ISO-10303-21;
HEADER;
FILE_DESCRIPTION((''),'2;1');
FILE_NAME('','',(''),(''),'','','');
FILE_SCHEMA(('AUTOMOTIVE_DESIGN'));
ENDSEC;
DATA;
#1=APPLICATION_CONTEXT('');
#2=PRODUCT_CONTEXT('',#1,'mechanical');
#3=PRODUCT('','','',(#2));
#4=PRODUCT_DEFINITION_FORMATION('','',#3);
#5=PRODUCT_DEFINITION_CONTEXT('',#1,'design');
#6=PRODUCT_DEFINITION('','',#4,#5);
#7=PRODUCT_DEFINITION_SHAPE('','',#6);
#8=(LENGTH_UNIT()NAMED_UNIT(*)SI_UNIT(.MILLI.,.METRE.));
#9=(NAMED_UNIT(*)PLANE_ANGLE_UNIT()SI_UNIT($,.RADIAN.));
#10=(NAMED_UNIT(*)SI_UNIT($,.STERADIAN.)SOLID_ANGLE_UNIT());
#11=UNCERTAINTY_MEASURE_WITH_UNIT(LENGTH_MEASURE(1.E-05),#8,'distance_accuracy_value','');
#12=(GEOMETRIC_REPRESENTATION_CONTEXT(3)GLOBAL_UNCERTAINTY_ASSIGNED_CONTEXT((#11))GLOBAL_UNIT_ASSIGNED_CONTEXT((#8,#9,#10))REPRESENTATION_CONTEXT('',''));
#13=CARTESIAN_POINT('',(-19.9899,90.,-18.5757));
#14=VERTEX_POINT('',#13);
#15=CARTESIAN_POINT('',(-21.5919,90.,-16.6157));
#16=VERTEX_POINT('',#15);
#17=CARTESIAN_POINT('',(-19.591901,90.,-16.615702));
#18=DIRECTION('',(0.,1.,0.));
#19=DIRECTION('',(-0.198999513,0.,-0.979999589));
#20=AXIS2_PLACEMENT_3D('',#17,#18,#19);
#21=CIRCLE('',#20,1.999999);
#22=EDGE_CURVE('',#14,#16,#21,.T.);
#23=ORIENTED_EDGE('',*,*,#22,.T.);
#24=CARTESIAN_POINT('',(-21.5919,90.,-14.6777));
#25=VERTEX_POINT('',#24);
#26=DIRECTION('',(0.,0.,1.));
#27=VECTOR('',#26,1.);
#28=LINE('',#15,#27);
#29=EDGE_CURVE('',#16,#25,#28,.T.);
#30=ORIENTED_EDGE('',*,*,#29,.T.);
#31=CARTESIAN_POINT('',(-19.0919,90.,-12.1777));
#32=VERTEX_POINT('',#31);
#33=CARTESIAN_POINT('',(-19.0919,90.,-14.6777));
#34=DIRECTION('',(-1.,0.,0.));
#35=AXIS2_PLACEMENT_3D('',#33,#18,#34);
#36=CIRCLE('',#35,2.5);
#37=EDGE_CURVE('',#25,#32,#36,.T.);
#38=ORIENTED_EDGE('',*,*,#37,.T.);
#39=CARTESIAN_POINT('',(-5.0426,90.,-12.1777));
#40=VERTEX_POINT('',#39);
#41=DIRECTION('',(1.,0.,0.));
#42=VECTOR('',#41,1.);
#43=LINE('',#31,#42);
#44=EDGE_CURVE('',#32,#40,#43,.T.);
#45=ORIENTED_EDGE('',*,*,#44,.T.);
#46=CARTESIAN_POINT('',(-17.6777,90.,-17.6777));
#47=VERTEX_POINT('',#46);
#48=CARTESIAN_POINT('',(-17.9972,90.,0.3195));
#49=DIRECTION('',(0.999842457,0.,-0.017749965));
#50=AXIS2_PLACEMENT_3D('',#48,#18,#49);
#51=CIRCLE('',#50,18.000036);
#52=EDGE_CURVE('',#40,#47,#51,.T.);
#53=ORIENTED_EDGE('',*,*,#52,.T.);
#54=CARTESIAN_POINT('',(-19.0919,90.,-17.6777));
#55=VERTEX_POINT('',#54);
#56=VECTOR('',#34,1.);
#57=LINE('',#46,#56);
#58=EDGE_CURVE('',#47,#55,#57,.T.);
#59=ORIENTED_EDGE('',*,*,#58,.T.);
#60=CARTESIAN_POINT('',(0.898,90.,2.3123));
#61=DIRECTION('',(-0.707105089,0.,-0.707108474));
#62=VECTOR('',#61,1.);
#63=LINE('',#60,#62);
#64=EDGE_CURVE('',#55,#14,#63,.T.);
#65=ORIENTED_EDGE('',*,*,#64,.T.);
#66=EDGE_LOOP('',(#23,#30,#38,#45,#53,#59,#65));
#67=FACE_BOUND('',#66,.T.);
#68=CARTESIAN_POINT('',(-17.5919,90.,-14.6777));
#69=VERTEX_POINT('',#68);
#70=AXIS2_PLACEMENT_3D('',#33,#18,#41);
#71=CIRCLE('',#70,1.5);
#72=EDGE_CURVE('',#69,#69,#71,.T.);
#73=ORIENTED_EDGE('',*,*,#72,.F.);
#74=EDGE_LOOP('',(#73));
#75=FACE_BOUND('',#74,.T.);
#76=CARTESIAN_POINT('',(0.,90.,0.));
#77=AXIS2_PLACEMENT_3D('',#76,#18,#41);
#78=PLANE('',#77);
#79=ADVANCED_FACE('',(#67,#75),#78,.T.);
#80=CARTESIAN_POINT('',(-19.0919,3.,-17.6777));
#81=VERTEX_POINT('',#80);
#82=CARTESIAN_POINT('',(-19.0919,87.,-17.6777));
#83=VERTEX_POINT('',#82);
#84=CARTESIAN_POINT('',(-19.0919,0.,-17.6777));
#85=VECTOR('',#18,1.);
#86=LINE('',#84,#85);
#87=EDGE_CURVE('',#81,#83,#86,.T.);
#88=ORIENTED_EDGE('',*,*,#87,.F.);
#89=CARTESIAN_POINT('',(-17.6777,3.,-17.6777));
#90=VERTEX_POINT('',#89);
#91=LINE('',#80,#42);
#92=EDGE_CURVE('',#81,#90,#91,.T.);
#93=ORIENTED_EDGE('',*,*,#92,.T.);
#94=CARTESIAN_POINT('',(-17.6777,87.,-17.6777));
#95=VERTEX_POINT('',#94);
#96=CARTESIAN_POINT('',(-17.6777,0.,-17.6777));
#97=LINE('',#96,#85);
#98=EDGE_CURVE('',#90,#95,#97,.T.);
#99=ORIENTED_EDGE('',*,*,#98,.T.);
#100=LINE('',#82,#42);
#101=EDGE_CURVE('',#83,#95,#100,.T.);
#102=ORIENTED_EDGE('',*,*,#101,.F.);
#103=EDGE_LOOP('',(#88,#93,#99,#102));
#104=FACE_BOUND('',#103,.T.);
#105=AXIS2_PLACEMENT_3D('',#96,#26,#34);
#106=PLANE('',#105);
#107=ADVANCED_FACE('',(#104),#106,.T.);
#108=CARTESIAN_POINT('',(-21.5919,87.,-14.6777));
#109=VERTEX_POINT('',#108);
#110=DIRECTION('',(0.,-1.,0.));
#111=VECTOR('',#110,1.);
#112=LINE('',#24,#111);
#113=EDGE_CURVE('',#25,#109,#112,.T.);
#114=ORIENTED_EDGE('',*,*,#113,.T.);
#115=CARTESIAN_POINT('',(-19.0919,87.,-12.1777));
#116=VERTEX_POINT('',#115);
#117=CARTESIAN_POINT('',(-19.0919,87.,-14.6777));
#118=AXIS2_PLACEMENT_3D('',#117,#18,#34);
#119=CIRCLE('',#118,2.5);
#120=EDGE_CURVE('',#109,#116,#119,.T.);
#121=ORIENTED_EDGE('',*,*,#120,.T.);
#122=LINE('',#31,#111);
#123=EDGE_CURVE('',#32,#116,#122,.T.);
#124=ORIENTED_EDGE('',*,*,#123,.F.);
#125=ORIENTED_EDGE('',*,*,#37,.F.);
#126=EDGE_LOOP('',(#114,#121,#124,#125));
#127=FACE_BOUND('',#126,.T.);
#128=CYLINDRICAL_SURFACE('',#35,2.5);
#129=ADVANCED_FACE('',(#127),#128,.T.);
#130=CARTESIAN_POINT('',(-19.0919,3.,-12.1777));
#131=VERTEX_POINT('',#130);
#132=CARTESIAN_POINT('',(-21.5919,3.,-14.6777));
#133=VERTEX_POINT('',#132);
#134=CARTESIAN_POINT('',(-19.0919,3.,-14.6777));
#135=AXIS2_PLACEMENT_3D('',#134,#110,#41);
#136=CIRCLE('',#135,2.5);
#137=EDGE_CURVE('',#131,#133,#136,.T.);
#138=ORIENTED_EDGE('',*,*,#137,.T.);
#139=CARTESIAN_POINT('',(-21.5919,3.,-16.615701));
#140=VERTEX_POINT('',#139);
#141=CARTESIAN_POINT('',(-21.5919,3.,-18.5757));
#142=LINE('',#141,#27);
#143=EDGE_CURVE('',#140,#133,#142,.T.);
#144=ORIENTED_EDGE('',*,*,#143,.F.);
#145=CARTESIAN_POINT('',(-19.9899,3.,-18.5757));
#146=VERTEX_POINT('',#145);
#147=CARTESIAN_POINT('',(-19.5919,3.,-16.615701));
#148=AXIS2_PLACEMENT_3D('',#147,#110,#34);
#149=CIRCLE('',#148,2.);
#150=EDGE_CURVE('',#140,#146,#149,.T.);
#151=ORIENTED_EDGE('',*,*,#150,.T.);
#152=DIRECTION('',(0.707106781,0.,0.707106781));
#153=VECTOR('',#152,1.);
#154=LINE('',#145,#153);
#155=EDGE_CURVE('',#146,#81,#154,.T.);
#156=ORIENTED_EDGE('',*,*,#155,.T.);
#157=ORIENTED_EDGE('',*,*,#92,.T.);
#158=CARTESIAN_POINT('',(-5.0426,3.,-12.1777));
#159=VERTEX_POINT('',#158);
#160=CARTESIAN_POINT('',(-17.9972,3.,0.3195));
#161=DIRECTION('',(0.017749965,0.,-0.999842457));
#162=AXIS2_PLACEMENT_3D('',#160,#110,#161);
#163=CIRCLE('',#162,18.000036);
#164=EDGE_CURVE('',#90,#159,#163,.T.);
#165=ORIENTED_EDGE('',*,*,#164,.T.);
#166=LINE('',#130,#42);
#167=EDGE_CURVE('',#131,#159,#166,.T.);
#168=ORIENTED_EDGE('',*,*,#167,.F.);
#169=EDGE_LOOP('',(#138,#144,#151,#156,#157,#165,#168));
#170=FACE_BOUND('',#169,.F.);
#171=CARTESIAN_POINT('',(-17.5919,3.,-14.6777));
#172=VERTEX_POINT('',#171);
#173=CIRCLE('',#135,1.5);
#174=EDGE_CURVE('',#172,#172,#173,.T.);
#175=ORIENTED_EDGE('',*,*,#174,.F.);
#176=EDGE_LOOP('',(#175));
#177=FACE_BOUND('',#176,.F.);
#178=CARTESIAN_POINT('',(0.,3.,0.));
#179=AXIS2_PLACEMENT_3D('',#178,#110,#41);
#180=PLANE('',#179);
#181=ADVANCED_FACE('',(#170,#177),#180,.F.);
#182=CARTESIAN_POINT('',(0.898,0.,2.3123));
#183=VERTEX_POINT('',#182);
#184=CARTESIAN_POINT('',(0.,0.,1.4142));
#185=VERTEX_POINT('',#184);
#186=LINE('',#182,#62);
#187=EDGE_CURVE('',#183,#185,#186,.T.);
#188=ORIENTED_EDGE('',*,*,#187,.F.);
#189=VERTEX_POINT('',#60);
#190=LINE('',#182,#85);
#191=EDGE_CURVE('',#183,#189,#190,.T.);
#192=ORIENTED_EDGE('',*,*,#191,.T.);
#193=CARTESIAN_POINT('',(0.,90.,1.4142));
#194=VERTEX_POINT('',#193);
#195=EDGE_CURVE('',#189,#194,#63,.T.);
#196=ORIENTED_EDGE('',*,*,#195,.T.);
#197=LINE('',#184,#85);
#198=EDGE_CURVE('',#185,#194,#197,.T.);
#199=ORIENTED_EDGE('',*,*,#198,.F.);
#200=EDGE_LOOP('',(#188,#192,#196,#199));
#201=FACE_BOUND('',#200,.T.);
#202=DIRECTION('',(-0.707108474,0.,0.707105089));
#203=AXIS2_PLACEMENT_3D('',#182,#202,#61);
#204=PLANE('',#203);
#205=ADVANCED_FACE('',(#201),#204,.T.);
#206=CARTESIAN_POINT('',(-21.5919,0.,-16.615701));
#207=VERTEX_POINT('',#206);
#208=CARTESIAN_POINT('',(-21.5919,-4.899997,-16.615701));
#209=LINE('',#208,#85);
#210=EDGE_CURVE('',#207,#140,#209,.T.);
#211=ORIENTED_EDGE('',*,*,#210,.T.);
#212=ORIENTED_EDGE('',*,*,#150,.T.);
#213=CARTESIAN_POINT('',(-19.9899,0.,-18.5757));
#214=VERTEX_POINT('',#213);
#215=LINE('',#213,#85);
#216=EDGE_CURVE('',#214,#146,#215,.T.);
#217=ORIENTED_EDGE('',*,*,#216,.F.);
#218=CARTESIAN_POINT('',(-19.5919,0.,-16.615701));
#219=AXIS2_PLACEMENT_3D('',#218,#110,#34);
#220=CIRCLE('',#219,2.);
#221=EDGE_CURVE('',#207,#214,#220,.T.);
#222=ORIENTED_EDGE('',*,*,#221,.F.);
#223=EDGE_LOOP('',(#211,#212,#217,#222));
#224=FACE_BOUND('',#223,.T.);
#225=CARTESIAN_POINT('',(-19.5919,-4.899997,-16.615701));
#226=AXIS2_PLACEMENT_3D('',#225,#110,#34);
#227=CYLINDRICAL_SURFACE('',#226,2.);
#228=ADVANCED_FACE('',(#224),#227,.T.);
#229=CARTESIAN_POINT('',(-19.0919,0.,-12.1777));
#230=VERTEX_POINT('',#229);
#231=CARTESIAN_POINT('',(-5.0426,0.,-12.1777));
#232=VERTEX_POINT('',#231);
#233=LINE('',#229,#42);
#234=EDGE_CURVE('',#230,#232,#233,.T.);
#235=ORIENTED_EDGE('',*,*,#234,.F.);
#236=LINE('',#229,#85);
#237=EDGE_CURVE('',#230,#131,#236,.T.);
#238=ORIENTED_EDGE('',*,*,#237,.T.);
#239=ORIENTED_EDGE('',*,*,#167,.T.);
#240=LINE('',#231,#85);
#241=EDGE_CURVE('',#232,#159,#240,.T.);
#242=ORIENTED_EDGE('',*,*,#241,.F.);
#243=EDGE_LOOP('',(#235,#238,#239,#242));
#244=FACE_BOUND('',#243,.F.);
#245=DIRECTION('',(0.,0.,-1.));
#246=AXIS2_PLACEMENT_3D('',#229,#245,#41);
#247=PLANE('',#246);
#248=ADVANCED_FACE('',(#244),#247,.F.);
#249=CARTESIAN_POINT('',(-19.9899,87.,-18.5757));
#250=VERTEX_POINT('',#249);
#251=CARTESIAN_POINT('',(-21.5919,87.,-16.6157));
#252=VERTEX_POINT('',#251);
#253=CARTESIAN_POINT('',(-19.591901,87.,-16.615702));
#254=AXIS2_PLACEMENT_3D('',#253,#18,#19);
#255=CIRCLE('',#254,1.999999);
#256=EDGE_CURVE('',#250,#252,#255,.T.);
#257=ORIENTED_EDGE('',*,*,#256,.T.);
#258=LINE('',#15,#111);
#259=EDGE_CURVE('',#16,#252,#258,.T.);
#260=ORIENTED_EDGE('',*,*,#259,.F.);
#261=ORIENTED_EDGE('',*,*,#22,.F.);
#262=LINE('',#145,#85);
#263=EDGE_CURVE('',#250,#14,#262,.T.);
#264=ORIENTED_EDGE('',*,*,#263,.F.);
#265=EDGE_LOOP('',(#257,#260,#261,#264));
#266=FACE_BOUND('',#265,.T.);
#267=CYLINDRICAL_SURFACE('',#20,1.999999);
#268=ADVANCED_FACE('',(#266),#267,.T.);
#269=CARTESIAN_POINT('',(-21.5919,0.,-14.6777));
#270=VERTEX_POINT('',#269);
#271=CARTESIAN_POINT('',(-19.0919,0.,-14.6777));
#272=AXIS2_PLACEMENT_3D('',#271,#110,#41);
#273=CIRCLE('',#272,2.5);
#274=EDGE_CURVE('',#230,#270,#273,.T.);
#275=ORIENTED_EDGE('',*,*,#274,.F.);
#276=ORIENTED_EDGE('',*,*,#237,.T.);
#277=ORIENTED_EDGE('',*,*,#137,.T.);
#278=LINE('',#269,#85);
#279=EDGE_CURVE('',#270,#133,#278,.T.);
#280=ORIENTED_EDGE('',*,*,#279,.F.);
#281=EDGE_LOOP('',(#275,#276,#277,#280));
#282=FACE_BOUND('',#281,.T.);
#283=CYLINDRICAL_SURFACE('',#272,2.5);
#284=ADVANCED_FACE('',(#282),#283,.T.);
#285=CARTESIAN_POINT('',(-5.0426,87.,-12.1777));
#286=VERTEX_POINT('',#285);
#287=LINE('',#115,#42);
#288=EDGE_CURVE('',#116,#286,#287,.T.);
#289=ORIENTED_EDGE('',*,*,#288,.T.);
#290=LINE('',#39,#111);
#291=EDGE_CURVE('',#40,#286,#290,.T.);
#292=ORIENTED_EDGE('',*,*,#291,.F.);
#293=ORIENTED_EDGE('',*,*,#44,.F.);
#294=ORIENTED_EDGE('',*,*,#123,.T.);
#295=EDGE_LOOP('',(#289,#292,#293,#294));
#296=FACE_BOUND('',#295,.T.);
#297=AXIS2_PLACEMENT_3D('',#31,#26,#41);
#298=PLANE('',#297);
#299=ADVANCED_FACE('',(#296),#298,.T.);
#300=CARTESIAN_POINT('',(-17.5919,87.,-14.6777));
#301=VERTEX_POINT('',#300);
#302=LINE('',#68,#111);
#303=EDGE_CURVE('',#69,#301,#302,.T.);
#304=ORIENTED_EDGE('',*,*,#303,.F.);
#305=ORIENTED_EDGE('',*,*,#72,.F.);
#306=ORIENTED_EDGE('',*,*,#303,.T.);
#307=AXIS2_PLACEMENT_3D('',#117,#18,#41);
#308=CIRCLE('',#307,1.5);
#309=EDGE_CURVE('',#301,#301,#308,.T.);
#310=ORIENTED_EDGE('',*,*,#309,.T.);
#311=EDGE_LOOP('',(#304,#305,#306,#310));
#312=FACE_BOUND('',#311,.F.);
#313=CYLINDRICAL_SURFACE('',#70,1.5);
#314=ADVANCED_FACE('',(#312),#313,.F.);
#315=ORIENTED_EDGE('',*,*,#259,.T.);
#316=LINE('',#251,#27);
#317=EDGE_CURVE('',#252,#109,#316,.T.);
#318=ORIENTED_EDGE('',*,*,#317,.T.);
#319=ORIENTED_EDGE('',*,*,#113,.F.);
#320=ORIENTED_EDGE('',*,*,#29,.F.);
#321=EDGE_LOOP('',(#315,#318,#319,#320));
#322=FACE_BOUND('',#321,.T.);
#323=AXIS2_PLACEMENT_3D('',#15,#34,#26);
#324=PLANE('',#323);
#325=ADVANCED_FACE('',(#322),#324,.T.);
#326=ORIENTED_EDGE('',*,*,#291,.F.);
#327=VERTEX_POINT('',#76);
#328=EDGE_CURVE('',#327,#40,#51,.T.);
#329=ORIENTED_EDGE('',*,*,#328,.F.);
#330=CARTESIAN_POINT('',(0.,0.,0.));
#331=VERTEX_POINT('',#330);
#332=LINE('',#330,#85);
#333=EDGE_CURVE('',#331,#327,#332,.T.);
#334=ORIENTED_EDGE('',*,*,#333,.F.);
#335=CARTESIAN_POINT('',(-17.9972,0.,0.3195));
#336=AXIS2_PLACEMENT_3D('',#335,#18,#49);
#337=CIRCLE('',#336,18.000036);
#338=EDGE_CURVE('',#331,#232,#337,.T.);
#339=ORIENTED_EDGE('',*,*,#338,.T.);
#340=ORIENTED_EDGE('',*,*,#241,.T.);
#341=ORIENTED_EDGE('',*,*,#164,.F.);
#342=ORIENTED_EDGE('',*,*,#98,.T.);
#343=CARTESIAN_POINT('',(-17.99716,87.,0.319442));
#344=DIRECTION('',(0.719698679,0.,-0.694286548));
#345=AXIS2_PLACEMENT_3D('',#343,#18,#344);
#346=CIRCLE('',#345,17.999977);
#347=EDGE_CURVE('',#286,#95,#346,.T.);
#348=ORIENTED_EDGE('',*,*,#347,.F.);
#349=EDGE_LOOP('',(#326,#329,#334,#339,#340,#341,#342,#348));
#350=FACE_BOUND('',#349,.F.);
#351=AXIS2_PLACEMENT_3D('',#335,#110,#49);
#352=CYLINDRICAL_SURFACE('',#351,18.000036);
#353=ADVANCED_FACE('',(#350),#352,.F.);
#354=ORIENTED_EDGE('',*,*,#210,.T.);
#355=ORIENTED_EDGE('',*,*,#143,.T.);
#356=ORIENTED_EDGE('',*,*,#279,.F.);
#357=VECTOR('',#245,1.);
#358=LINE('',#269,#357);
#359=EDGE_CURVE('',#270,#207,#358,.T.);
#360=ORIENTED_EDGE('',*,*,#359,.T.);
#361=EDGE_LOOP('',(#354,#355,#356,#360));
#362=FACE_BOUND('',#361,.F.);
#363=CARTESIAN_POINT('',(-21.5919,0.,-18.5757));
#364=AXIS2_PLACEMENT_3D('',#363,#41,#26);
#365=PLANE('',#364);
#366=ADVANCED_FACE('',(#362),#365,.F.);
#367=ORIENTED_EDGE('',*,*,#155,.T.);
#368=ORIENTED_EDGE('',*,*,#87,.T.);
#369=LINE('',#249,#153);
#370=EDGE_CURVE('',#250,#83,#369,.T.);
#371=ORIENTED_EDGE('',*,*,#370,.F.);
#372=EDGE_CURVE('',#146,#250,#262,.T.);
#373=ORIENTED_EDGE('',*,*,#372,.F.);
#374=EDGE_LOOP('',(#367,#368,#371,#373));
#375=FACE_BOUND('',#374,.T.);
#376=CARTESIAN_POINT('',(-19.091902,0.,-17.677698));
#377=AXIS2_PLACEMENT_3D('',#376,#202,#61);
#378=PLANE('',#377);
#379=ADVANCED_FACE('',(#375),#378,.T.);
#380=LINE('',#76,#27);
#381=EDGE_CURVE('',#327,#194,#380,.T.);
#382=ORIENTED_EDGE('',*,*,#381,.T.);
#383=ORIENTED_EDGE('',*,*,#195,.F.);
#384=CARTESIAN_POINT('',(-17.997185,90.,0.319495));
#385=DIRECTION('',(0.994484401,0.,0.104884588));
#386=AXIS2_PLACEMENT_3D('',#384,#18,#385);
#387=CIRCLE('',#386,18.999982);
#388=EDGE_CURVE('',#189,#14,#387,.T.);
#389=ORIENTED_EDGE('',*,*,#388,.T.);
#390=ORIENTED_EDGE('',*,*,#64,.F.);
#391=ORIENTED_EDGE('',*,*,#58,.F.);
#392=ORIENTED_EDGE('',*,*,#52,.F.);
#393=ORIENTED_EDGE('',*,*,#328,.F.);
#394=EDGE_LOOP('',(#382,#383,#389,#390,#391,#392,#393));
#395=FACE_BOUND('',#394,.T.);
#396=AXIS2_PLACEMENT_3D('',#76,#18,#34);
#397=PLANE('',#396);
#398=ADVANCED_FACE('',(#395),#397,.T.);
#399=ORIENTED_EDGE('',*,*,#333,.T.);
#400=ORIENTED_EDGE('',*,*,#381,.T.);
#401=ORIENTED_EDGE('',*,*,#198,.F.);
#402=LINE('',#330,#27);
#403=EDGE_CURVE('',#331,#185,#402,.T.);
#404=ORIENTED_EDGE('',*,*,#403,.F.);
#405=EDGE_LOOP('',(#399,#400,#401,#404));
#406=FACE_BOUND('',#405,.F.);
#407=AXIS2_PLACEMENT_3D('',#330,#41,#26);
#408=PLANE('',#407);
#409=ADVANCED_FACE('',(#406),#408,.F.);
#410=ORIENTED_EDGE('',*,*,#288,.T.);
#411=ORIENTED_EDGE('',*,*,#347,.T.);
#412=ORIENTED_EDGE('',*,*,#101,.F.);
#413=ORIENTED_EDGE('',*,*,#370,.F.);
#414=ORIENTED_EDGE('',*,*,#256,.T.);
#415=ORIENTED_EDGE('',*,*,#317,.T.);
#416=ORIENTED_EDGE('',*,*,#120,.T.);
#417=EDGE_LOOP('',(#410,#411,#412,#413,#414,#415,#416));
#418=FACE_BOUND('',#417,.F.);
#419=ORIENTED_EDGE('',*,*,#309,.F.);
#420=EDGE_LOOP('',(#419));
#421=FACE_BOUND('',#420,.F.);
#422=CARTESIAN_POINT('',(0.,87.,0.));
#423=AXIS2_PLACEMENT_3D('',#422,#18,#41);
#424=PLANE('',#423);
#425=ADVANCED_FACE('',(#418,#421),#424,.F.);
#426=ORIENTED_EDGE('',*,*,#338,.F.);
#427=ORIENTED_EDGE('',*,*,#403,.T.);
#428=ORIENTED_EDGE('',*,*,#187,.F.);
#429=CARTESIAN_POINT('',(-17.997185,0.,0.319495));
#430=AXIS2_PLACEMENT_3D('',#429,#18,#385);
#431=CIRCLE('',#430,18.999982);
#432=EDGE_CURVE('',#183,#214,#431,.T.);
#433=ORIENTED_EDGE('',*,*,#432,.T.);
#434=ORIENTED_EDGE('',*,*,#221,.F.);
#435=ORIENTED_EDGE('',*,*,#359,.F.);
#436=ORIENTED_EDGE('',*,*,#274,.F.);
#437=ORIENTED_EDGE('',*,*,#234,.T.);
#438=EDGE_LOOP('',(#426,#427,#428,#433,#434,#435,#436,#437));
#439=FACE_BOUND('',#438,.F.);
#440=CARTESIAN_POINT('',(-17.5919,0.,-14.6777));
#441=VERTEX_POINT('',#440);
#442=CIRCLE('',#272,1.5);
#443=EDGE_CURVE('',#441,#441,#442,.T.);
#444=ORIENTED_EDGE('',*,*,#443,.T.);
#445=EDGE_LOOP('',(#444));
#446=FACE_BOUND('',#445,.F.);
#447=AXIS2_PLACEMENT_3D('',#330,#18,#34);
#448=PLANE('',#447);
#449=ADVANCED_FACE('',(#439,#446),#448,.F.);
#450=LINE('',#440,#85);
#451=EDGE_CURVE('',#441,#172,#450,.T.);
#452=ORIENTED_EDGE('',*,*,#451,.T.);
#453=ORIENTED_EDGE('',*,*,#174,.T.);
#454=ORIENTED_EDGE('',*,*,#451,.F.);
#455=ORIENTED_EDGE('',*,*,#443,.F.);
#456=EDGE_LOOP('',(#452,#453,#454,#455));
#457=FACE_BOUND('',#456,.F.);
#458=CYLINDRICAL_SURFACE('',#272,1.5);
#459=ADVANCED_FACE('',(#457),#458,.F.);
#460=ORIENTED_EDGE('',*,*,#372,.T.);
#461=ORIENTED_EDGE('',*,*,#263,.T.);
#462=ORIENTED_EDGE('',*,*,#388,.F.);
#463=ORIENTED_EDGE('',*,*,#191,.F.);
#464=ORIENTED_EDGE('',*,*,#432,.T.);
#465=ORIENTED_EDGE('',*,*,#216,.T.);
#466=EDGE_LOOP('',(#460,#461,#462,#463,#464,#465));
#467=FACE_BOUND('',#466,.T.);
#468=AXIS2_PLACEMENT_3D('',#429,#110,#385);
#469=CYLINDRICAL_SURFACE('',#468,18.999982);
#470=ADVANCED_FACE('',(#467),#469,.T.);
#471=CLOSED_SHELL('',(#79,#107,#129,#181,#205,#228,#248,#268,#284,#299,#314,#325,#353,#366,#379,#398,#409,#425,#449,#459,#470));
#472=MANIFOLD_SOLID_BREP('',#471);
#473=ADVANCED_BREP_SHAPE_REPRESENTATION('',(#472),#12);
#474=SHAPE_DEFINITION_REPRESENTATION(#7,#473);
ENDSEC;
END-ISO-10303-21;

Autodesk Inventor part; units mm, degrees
ref_plane "YZ Plane" through (0, 0, 0) normal (1, 0, 0) x (0, 1, 0)
ref_plane "XZ Plane" through (0, 0, 0) normal (0, 1, 0) x (-1, 0, 0)
ref_plane "XY Plane" through (0, 0, 0) normal (0, 0, 1) x (1, 0, 0)
sketch "스케치1" plane through (0, 0, 0) normal (0, 1, 0) x (-1, 0, 0)
  arc A0 (0, 0) -> (17.6777, -17.6777) centre (17.9972, 0.3195) ccw
  line L0 (0, 0) -> (17.6777, -17.6777) construction
  line L1 (0, 0) -> (25, 0) construction
  arc A1 (-0.898, 2.3123) -> (19.9899, -18.5757) centre (17.9972, 0.3195) ccw
  line L2 (-0.898, 2.3123) -> (19.9899, -18.5757)
  line L3 (0, 0) -> (0, 1.4142)
  line L4 (17.6777, -17.6777) -> (19.0919, -17.6777)
  dimension "d0" = 25
  dimension "d1" = 45
  dimension "d2" = 18
  dimension "d3" = 1
extrude "돌출1" add sketch "스케치1" along normal blind 90 contours A0 L4 L2 A1 L3
sketch "스케치2" plane through (0, 0, 0) normal (0, -1, 0) x (1, 0, 0)
  circle A0 centre (-19.0919, -14.6777) radius 1.5
  arc A1 (-17.6777, -17.6777) -> (0, 0) centre (-17.9972, 0.3195) ccw projected
  circle A2 centre (-19.0919, -14.6777) radius 2.5
  line L0 (-19.0919, -12.1777) -> (-5.0426, -12.1777)
  line L1 (-21.5919, -14.6777) -> (-21.5919, -18.2148)
  line L2 (-21.5919, -14.6777) -> (-18.0548, -14.6777) construction
  line L3 (-19.9899, -18.5757) -> (-19.0919, -17.6777) projected
  line L4 (-19.9899, -18.5757) -> (-21.5919, -18.5757)
  line L5 (-21.5919, -18.5757) -> (-21.5919, -18.2148)
  line L6 (0, 0) -> (0, 1.4142) projected
  line L7 (0, 1.4142) -> (0.898, 2.3123) projected
  arc A3 (-19.9899, -18.5757) -> (0.898, 2.3123) centre (-17.9972, 0.3195) ccw projected
  line L8 (-19.9899, -18.5757) -> (-19.0919, -17.6777) projected
  line L9 (-19.0919, -17.6777) -> (-17.6777, -17.6777) projected
  arc A4 (-17.6777, -17.6777) -> (0, 0) centre (-17.9972, 0.3195) ccw projected
  point P0 (-17.6777, -17.6777)
  dimension "d6" = 3
  dimension "d7" = 3
  dimension "d8" = 1
  dimension "d9" = 90
extrude "돌출2" add sketch "스케치2" against normal blind 3 contours L9 L3 L4 L5 L1 A2 L0 A1 | A2
fillet "모깎기1" radius 2 1 edges at (-21.5919, 1.5, -18.5757)
sketch "스케치3" plane through (0, 90, 0) normal (0, 1, 0) x (1, 0, 0)
  arc A0 (-19.9899, 18.5757) -> (-21.5919, 16.6157) centre (-19.5919, 16.6157) ccw projected
  line L0 (-21.5919, 16.6157) -> (-21.5919, 14.6777) projected
  arc A1 (-21.5919, 14.6777) -> (-19.0919, 12.1777) centre (-19.0919, 14.6777) ccw projected
  line L1 (-19.0919, 12.1777) -> (-5.0426, 12.1777) projected
  arc A2 (-5.0426, 12.1777) -> (-17.6777, 17.6777) centre (-17.9972, -0.3195) ccw projected
  line L2 (-19.0919, 17.6777) -> (-17.6777, 17.6777) projected
  line L3 (-19.9899, 18.5757) -> (-19.0919, 17.6777) projected
  circle A3 centre (-19.0919, 14.6777) radius 1.5 projected
  point P0 (0, 0)
extrude "돌출3" add sketch "스케치3" against normal blind 3
properties part number "wind blade"
